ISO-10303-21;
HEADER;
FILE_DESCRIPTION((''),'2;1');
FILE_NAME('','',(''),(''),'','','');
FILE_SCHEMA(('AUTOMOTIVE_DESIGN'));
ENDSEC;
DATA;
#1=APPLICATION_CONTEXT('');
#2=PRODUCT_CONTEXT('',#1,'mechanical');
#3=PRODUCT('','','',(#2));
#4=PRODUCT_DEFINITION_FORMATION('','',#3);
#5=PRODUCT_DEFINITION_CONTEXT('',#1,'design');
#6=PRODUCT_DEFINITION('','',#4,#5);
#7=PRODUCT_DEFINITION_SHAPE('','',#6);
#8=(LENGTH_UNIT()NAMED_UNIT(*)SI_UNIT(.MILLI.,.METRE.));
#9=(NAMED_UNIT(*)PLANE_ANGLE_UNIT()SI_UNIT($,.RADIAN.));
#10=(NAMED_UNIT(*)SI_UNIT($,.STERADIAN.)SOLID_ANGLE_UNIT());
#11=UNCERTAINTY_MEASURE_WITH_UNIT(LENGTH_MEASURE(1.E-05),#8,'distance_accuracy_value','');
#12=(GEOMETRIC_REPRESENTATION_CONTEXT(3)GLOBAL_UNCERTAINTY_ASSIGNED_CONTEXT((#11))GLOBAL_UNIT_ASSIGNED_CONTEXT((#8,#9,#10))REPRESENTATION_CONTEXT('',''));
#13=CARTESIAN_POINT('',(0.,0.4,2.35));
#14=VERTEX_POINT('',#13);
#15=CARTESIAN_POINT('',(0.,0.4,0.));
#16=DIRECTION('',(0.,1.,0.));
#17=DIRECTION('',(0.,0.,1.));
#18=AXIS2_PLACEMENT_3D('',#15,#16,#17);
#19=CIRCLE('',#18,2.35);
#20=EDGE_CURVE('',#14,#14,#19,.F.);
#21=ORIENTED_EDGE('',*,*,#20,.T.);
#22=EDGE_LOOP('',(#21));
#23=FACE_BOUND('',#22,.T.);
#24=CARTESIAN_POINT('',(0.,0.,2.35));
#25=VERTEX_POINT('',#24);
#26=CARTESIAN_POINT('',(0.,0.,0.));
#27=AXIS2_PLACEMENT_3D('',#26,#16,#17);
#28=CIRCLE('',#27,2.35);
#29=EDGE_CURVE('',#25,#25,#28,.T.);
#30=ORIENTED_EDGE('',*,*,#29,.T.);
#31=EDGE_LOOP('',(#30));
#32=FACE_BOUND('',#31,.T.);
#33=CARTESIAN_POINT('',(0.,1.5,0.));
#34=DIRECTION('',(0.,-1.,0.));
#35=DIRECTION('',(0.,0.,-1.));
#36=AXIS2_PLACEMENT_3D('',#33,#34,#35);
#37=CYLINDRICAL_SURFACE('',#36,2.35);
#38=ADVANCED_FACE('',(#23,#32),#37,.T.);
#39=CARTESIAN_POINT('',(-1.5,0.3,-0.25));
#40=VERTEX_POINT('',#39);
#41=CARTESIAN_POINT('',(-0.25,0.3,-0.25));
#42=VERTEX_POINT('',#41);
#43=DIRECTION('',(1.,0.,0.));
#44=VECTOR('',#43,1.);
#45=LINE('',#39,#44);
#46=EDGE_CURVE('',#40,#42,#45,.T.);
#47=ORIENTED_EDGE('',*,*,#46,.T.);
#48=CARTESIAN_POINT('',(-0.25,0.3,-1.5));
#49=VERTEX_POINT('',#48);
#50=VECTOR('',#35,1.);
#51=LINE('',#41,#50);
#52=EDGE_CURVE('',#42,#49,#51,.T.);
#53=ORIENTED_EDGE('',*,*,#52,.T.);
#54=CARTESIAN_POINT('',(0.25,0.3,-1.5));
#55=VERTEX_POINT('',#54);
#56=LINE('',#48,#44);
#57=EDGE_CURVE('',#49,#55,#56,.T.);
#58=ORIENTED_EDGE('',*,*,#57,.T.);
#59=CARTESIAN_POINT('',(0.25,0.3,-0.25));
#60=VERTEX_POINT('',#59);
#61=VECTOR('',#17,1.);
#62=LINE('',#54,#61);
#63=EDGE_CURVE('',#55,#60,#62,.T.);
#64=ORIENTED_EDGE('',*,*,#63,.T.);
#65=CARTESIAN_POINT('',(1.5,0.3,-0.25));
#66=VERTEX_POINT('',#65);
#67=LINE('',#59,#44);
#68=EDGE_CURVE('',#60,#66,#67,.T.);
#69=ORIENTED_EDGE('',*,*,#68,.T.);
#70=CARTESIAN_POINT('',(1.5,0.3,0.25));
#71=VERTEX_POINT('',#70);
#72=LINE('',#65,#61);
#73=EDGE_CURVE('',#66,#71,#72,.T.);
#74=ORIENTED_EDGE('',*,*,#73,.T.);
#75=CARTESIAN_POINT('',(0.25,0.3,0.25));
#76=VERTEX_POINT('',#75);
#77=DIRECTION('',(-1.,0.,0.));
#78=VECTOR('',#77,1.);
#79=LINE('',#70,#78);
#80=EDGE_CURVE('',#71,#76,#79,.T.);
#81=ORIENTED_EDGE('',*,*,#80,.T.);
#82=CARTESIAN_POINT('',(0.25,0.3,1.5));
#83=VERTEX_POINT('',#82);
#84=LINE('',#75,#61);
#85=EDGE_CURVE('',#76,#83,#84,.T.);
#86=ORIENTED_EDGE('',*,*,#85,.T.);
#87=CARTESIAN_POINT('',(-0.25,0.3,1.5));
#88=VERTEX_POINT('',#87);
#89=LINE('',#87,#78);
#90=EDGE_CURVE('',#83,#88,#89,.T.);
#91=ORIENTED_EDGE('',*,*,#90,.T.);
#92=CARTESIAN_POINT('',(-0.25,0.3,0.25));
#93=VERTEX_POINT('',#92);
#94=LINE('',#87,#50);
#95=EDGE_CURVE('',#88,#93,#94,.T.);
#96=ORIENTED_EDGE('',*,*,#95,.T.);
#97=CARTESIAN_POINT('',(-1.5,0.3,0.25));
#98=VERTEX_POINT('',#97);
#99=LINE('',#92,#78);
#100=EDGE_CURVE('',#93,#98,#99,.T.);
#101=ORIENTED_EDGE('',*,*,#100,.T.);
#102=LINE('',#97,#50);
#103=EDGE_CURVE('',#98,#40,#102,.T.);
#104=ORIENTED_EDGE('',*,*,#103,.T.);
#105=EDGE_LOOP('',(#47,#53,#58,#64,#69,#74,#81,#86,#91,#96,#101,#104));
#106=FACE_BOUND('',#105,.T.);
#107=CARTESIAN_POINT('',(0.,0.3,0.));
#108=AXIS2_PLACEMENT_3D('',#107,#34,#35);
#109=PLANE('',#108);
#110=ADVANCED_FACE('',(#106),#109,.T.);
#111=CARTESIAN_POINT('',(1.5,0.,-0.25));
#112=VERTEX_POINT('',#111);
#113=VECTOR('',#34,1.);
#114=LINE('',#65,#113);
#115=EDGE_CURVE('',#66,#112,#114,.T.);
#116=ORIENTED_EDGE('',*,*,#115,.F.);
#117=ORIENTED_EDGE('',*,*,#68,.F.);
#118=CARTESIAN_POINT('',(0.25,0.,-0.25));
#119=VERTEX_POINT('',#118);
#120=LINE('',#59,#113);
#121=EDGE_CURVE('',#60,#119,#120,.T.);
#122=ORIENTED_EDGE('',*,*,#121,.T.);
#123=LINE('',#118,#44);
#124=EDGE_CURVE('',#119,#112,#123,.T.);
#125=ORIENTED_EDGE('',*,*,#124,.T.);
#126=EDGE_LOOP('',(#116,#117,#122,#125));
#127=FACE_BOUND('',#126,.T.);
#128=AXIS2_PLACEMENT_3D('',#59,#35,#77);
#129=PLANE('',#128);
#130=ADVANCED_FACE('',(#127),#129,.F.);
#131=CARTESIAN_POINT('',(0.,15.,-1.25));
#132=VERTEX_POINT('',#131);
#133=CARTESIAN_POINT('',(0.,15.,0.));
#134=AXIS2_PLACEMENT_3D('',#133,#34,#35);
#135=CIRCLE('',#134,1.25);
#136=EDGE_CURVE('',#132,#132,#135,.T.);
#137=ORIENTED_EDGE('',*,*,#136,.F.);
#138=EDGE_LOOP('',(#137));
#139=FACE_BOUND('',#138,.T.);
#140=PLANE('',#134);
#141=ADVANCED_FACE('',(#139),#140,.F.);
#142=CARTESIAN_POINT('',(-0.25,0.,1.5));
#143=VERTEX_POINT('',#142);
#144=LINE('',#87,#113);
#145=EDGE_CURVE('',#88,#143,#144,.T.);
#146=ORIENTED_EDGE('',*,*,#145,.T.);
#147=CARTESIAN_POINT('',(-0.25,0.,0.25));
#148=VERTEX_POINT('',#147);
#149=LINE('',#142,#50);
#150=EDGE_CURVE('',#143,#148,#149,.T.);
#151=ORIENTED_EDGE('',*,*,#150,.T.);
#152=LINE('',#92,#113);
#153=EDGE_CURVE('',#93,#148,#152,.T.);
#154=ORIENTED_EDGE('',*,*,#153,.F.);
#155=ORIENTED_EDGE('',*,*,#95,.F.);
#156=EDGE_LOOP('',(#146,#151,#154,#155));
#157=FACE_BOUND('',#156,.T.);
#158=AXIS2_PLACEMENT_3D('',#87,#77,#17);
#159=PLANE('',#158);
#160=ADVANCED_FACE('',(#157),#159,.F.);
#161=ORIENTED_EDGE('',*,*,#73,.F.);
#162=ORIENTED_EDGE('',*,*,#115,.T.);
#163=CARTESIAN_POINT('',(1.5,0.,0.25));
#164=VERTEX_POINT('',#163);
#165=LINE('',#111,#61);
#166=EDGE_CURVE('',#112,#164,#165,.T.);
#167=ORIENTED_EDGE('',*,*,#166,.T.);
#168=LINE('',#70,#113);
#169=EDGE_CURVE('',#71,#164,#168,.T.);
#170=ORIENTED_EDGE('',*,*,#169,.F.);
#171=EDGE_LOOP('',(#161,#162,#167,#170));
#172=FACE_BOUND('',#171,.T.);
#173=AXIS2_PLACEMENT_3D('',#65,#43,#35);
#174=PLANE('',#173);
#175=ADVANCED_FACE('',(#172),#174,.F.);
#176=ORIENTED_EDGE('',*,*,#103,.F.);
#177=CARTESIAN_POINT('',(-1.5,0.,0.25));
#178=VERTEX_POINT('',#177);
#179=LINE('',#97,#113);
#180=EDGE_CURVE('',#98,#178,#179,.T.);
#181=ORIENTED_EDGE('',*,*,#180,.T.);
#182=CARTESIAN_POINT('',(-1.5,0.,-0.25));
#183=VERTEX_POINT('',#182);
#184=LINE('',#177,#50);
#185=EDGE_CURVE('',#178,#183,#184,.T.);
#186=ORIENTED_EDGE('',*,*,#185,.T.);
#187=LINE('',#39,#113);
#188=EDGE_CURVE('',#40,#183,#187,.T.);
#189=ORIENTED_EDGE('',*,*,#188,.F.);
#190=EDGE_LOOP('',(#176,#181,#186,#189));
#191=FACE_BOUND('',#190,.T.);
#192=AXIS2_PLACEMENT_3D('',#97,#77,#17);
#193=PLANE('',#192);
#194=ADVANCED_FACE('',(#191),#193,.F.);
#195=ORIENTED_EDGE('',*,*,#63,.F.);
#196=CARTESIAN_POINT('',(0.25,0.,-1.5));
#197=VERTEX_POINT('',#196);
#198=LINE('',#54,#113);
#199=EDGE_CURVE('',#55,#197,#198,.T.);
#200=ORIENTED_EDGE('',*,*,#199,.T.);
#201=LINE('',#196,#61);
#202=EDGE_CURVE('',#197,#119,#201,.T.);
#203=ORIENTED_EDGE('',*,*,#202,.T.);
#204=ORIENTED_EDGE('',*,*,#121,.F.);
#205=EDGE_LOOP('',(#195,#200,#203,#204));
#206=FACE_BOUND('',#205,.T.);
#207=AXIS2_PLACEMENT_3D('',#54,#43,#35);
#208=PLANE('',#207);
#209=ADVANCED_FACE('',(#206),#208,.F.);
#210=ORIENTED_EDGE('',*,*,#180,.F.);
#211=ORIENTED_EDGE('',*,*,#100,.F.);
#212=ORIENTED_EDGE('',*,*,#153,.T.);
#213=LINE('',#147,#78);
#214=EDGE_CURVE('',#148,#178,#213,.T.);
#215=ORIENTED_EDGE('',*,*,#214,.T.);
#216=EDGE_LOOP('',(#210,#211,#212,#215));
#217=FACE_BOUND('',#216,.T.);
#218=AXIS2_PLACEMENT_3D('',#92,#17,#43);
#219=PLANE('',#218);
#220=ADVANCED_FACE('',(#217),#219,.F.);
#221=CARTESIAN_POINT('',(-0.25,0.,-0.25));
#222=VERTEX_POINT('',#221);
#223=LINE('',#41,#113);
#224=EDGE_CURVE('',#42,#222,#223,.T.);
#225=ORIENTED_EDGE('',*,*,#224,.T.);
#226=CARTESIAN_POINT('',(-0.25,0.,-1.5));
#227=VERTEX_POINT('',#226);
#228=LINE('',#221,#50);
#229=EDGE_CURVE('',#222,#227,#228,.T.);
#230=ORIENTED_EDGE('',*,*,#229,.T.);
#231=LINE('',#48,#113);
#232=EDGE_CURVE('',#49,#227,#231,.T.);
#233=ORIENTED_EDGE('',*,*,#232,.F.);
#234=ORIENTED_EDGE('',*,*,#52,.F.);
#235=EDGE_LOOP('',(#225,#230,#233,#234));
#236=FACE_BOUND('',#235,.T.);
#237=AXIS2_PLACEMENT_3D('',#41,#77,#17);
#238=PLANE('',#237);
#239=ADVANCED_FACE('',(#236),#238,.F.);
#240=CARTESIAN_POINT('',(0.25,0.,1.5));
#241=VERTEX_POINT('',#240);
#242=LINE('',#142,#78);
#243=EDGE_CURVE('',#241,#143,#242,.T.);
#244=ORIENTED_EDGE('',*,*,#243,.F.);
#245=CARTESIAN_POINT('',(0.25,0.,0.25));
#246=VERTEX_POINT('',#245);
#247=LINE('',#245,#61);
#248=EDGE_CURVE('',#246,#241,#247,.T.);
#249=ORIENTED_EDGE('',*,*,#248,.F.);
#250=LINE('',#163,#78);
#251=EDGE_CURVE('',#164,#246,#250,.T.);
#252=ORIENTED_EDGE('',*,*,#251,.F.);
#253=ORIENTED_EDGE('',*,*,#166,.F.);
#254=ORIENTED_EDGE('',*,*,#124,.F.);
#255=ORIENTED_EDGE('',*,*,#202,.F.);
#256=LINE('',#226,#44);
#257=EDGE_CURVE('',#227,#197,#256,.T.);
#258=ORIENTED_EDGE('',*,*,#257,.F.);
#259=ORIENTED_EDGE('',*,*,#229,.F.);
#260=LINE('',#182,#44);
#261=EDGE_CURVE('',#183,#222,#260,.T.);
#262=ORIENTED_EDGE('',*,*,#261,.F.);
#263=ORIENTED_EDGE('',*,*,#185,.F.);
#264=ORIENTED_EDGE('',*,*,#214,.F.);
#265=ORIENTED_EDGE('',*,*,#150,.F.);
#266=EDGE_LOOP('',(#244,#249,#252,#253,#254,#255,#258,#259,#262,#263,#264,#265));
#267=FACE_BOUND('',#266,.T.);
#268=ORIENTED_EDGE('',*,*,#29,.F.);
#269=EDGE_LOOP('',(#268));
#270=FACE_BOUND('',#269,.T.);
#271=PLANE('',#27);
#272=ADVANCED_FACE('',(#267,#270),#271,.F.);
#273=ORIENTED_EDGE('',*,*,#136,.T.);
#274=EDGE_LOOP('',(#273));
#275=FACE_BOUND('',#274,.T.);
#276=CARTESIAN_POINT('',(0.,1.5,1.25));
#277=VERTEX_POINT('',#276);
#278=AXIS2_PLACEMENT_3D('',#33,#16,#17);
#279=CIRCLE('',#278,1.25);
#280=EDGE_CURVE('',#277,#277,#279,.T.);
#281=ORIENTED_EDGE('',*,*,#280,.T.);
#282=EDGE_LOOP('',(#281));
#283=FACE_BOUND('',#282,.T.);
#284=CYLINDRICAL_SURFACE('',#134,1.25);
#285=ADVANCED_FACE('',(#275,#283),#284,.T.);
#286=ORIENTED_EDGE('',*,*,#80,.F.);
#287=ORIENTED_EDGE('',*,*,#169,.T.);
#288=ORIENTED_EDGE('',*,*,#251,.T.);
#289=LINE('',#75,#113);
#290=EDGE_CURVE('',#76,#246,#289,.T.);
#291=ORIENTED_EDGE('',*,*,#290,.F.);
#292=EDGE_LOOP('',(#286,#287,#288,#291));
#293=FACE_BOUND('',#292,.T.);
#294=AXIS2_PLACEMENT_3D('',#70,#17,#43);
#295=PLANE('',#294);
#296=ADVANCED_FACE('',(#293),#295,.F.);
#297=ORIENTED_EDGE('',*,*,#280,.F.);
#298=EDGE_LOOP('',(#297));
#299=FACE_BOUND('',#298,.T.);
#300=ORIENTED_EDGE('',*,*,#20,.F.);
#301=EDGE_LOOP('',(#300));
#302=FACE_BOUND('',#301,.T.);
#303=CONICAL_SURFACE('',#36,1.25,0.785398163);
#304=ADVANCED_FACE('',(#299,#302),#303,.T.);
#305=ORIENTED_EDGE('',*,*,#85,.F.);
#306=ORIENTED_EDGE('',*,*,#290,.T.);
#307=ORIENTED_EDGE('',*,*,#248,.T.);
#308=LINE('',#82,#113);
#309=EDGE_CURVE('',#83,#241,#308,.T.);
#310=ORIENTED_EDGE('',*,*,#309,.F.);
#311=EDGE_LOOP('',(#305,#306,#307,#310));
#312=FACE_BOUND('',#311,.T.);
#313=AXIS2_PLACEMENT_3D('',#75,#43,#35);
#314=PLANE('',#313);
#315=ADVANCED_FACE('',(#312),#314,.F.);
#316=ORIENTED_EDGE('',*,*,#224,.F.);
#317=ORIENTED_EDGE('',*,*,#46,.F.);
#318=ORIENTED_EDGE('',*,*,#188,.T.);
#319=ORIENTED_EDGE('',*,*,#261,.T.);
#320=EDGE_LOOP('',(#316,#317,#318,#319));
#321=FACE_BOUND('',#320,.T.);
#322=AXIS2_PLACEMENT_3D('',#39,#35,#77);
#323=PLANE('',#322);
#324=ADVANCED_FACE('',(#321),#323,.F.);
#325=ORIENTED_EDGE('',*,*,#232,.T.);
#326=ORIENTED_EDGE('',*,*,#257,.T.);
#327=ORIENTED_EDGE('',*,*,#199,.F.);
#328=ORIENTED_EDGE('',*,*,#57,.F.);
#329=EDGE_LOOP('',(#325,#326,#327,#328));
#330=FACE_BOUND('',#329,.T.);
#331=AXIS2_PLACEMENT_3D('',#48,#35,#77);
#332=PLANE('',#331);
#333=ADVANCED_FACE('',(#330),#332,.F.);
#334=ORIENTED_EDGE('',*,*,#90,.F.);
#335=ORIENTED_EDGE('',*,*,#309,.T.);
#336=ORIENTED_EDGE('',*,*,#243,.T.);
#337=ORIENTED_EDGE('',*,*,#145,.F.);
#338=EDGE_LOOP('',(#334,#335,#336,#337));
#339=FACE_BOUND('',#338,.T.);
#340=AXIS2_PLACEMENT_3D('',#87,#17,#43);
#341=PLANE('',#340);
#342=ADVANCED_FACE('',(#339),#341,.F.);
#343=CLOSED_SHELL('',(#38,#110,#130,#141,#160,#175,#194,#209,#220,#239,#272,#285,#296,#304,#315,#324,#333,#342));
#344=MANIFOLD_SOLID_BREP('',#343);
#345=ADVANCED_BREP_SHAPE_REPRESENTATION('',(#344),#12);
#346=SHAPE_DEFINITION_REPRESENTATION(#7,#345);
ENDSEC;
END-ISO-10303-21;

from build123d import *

# Parameters (mm, degrees)
SKETCH1_R           = 2.35
BOSS_EXTRUDE1_DEPTH = 1.5
SKETCH2_R           = 1.25
BOSS_EXTRUDE2_DEPTH = 15
CHAMFER1_SIZE       = 1.1
CUT_EXTRUDE1_DEPTH  = 0.3


with BuildPart() as part:
    # Sketch1 → Boss-Extrude1 (new body)
    with BuildSketch(Plane(origin=(0, 0, 0), x_dir=(1, 0, 0), z_dir=(0, 1, 0))):
        with Locations(Location((0, 0, 0), (0, 0, 270))):
            Circle(SKETCH1_R)
    extrude(amount=BOSS_EXTRUDE1_DEPTH)

    # Sketch2 → Boss-Extrude2 (add)
    with BuildSketch(Plane.XZ):
        with Locations(Location((0, 0, 0), (0, 0, 270))):
            Circle(SKETCH2_R)
    extrude(amount=-BOSS_EXTRUDE2_DEPTH)

    # Chamfer1
    chamfer1_edges = [part.edges().sort_by_distance(p)[0] for p in [
        (0, 1.5, -2.35),
    ]]
    chamfer(chamfer1_edges, length=CHAMFER1_SIZE - 0.0001)  # a hair under: the kernel refuses the full size

    # Sketch3 → Cut-Extrude1 (cut)
    with BuildSketch(Plane.XZ):
        Polygon((-0.25, 1.5), (-0.25, 0.25), (-1.5, 0.25), (-1.5, -0.25), (-0.25, -0.25), (-0.25, -1.5), (0.25, -1.5), (0.25, -0.25), (1.5, -0.25), (1.5, 0.25), (0.25, 0.25), (0.25, 1.5), align=None)
    extrude(amount=-CUT_EXTRUDE1_DEPTH, mode=Mode.SUBTRACT)


solid = part.part
